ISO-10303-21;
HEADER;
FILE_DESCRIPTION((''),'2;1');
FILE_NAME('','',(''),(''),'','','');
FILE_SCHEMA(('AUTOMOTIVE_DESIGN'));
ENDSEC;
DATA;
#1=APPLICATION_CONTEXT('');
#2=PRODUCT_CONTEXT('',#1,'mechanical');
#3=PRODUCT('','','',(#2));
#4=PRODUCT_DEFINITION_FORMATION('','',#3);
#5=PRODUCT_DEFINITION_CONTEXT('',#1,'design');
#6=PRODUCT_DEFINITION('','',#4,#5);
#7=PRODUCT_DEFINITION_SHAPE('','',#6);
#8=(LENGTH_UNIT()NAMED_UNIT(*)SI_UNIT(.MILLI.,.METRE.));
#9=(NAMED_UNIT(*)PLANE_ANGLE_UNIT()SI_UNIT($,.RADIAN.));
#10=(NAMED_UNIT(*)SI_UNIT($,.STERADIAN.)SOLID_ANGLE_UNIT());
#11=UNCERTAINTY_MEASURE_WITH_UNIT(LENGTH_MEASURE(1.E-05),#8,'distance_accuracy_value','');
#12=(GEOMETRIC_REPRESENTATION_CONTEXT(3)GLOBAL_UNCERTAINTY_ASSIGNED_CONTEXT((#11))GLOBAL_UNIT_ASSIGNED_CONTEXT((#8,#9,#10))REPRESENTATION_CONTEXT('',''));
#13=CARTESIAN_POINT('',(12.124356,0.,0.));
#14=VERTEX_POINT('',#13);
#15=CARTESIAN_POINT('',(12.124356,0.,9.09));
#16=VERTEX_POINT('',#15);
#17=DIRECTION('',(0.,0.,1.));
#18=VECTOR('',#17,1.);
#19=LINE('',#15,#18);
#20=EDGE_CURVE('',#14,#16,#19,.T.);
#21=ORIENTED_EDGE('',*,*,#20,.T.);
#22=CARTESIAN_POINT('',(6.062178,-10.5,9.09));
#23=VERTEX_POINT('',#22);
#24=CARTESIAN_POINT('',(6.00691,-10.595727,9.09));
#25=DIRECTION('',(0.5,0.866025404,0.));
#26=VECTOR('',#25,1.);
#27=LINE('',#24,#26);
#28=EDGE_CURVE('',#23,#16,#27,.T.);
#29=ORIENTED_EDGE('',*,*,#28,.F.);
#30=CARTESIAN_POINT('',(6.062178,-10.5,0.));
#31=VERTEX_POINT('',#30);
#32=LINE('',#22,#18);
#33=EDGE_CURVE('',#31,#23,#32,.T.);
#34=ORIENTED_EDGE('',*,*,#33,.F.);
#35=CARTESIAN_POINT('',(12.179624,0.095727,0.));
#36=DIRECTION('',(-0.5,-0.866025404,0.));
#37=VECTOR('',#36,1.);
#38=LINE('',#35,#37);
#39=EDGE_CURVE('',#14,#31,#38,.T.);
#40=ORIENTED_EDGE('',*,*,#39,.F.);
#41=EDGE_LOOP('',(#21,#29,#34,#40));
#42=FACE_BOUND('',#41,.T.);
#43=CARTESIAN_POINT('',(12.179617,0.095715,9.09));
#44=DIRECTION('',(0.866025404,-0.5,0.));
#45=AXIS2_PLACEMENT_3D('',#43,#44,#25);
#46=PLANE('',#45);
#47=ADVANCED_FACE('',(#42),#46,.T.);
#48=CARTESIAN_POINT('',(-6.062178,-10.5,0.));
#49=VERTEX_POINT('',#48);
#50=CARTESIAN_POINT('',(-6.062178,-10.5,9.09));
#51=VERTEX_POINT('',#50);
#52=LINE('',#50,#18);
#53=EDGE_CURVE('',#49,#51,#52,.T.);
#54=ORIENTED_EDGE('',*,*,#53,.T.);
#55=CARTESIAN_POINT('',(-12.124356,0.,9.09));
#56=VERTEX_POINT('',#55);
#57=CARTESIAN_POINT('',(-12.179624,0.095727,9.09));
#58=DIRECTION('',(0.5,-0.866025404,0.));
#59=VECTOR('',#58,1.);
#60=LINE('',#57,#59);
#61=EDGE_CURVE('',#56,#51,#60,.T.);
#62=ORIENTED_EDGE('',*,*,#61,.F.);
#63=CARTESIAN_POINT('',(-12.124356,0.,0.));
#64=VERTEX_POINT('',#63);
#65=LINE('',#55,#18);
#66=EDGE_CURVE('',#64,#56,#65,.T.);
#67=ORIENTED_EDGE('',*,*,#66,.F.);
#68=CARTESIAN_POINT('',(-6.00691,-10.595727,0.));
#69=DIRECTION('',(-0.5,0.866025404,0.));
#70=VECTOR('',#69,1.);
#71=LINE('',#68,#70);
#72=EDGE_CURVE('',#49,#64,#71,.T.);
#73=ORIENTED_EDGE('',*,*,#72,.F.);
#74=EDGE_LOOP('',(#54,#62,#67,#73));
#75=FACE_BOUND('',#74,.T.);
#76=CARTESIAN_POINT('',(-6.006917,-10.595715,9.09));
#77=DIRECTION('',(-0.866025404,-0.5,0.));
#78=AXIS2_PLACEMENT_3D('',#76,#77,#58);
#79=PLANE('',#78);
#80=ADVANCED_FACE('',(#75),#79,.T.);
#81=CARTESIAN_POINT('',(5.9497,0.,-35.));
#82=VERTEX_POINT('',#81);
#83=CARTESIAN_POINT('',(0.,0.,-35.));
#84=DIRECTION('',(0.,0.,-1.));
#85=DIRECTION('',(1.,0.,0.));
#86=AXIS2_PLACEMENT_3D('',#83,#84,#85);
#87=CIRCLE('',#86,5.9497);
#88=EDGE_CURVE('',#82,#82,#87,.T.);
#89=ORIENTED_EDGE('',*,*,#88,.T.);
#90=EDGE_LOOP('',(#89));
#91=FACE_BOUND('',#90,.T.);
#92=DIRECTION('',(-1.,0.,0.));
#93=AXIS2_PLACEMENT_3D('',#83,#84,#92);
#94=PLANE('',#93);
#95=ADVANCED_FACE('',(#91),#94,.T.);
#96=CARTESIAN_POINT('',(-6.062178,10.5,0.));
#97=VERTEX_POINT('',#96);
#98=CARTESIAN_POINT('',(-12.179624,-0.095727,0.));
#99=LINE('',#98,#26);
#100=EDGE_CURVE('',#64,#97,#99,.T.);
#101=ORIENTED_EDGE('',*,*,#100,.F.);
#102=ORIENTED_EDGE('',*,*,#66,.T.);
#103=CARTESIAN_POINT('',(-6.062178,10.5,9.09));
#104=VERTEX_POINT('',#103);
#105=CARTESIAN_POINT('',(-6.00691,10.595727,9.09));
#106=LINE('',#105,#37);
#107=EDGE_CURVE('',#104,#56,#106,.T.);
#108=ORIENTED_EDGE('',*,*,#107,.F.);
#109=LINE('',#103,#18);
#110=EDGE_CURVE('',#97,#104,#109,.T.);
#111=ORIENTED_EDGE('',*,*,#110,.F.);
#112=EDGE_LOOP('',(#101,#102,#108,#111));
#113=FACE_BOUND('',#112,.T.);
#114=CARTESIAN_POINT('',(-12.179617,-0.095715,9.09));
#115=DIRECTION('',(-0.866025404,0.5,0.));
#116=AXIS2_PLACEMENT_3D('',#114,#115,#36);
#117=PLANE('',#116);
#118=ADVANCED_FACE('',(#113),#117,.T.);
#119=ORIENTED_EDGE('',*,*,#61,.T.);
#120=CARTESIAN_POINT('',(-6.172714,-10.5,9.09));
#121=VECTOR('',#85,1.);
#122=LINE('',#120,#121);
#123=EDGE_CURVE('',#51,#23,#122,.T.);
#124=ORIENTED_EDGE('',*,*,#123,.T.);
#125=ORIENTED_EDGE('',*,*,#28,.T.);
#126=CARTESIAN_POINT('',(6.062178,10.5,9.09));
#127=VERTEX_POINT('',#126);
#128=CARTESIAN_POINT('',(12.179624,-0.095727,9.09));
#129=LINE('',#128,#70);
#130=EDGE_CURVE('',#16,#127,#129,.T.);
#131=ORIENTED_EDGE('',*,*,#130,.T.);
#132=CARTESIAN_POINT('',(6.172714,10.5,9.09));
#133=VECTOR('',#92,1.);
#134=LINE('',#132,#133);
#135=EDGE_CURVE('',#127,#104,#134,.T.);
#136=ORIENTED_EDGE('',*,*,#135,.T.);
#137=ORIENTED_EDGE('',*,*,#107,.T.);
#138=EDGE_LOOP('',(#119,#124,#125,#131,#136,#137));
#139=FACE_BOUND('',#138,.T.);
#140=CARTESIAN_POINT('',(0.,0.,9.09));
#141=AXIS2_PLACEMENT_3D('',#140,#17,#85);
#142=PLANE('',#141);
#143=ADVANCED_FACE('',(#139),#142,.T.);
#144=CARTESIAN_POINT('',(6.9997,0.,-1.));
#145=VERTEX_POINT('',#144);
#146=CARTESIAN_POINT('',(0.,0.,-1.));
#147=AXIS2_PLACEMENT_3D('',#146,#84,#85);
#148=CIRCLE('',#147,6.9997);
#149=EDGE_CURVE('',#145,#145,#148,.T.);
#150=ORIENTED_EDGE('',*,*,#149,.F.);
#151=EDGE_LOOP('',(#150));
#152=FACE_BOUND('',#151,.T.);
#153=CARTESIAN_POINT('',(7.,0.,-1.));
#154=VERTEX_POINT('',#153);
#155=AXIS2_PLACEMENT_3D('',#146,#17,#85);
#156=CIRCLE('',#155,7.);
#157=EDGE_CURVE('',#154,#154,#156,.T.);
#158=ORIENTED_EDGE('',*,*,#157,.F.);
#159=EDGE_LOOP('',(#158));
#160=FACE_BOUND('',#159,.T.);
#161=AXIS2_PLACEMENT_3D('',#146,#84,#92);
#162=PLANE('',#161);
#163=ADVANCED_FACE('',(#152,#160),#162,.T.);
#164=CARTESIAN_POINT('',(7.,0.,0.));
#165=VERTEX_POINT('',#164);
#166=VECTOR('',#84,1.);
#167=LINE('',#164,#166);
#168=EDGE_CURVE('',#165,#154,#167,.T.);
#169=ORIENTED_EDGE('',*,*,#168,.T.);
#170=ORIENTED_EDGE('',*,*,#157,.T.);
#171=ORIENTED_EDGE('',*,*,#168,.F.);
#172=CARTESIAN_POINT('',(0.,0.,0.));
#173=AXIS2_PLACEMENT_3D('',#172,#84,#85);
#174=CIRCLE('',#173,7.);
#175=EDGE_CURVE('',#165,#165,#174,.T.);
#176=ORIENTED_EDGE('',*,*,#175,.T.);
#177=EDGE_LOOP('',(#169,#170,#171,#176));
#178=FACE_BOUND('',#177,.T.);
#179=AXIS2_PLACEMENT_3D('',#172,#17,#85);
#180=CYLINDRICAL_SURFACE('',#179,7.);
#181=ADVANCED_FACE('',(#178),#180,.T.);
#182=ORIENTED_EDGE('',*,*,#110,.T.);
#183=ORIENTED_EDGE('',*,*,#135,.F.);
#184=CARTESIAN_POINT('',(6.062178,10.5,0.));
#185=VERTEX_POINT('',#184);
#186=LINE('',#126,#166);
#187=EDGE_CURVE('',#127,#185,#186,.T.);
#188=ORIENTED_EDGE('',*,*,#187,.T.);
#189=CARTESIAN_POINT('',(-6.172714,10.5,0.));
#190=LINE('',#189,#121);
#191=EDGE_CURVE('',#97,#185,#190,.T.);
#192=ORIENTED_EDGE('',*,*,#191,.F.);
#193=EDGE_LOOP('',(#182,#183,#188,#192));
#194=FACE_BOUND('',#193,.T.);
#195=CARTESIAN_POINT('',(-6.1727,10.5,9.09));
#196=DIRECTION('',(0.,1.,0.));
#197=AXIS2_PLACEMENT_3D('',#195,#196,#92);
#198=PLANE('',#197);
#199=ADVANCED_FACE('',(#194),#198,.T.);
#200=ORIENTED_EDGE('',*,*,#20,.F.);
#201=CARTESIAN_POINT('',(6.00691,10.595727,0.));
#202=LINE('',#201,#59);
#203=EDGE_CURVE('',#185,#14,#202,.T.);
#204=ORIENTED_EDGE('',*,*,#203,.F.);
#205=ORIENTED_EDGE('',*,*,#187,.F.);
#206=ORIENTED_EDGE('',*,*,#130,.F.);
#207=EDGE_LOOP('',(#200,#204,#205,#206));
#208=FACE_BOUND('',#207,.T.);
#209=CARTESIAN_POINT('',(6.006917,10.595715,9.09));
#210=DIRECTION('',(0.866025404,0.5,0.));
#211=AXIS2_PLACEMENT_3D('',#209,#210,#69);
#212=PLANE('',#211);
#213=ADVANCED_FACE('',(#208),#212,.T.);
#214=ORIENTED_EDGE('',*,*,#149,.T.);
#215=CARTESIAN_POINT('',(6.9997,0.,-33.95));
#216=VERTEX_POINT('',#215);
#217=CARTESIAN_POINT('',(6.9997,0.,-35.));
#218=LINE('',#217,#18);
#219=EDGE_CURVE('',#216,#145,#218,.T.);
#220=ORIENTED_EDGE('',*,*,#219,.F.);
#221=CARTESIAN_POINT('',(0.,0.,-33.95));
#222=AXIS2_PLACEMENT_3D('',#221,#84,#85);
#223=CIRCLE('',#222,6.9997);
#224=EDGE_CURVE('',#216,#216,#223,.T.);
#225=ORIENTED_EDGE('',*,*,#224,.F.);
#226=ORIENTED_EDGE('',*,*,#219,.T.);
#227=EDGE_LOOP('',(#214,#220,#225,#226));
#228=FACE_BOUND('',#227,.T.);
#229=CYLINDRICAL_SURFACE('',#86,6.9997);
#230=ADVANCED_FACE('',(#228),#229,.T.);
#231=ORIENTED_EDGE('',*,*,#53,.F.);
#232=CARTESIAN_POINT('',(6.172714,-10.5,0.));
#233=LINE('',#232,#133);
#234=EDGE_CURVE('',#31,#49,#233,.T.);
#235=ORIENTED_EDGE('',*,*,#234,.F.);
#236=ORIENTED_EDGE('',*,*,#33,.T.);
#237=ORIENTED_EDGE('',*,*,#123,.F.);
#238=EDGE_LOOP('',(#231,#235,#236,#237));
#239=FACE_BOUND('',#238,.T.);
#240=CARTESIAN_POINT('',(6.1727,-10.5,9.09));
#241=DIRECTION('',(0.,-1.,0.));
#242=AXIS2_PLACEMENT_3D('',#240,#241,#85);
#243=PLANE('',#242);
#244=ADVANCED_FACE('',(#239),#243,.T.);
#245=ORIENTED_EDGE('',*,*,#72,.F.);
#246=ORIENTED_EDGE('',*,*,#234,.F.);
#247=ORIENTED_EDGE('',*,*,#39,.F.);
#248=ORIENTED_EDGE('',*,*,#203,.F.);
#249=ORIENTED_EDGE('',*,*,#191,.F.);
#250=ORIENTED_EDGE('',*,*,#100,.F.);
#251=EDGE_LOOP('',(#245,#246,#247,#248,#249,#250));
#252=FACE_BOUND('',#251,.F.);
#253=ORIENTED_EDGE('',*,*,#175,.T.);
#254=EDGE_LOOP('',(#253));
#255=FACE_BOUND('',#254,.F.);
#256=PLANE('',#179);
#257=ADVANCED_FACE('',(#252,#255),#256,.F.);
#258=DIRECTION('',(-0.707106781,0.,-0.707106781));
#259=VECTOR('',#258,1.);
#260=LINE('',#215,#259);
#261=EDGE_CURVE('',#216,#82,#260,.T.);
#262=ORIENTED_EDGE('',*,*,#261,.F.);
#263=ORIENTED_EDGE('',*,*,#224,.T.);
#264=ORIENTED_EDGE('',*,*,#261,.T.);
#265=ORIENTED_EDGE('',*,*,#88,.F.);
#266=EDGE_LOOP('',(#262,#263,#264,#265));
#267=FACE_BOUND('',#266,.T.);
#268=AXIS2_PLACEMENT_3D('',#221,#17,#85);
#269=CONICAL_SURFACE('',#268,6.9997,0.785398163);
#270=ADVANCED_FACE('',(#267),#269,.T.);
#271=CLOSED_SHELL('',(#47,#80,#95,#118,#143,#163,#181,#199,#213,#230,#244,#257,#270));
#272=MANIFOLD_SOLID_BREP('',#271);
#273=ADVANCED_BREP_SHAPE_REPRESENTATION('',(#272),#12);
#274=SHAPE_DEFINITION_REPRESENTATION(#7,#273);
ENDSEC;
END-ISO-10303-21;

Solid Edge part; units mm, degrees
sketch "Sketch1" plane through (0, 0, 0) normal (0, 0, 1) x (1, 0, 0)
  circle A0 centre (0, 0) radius 12.18
  dimension "D1" = 24.36
extrude "Protrusion1" add sketch "Sketch1" along normal blind 9.09
sketch "Sketch2" plane through (0, 0, 0) normal (0, 0, -1) x (1, 0, 0)
  circle A0 centre (0, 0) radius 7
extrude "Protrusion2" add sketch "Sketch2" along normal blind 35
sketch "Sketch3" plane through (0, 0, -35) normal (0, 0, -1) x (1, 0, 0)
  circle A0 centre (0, 0) radius 6.9997
extrude "Cutout1" cut sketch "Sketch3" against normal blind 34 flip side to cut
chamfer "Chamfer_1" distance 1.05 angle 45 1 edges at (-6.9997, 0, -35)
sketch "Sketch4" plane through (0, 0, 9.09) normal (0, 0, 1) x (1, 0, 0)
  line L0 (-6.1727, 10.5) -> (6.1727, 10.5)
  dimension "D1" = 21
extrude "Cutout2" cut sketch "Sketch4" against normal up to next material side at (0, 10.55, 9.09)
pattern_circular "Pattern1" count 6 over 360 about axis through (0, 0, 9.09) along (0, 0, 1) of "Cutout2"
properties part number "107493"
